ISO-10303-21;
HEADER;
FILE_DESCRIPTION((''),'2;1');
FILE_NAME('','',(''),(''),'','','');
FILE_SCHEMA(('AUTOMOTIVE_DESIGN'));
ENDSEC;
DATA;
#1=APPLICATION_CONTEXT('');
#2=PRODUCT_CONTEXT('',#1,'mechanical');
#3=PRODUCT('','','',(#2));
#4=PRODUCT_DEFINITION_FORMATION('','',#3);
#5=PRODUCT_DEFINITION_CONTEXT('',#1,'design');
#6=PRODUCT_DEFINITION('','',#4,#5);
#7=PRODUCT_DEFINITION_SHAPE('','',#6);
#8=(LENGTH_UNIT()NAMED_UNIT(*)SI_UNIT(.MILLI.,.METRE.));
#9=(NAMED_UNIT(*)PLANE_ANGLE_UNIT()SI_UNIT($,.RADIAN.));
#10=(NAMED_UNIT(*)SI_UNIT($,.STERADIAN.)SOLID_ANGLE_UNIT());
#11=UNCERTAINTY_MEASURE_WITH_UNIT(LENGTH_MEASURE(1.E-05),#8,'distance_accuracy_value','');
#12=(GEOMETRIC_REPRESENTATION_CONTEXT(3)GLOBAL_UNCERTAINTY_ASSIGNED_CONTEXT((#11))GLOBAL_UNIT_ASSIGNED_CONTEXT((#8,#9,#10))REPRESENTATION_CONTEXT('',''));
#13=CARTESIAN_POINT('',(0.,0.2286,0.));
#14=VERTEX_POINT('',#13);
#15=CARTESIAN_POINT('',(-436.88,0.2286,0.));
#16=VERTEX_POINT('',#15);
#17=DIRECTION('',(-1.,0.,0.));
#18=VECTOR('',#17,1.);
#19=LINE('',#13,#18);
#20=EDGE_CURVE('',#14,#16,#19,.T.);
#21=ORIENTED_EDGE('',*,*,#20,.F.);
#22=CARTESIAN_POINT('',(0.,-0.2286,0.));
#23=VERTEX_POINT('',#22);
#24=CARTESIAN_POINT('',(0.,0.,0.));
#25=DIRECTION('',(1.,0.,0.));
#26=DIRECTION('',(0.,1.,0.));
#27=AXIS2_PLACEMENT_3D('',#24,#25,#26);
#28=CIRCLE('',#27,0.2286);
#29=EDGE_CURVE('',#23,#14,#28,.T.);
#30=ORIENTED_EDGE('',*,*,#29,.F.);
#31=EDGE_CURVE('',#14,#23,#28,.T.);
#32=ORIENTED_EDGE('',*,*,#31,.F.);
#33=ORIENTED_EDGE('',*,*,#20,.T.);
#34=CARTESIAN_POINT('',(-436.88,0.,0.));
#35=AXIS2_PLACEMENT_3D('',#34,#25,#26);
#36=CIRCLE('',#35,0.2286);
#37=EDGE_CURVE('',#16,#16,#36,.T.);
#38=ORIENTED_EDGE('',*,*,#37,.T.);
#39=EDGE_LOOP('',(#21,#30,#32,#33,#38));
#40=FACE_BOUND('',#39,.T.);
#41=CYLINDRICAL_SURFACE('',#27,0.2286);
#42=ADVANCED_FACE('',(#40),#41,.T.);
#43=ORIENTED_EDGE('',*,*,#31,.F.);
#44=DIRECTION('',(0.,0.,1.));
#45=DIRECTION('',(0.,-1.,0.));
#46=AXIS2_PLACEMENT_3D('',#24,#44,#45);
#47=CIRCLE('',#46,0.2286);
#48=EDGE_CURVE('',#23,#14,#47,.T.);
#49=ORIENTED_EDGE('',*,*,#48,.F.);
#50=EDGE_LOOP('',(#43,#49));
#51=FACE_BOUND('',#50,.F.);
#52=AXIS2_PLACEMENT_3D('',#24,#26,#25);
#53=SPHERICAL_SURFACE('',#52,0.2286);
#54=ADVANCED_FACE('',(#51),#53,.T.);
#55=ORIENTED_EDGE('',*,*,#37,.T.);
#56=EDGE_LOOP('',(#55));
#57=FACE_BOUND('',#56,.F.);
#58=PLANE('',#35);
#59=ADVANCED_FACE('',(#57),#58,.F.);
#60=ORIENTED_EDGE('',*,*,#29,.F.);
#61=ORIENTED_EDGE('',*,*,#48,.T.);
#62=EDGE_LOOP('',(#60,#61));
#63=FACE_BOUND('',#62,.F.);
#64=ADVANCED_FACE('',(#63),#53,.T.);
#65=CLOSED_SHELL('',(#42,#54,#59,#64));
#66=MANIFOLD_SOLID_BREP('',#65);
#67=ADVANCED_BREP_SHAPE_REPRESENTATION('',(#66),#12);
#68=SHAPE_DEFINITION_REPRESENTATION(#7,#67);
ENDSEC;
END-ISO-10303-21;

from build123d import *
from build123d import SkipClean  # not in build123d's __all__

# Parameters (mm, degrees)
F2_R     = 0.2286
F3_DEPTH = 436.88


with BuildPart() as f1:
    # F0 (on Top) → F1 (revolve)
    with BuildSketch(Plane.XY):
        with BuildLine():
            Line((0, 0.2286), (0, -0.2286))
            ThreePointArc((0, -0.2286), (0.2286, 0), (0, 0.2286))
        make_face()
    revolve(axis=Axis((0, 0, 0), (0, -1, 0)))

    # F2 (on Right) → F3 (join)
    with BuildSketch(Plane.YZ):
        Circle(F2_R)
    with SkipClean():  # cleaning this boolean's faces spoils the solid; the shape is the same uncleaned
        extrude(amount=-F3_DEPTH)


solid = f1.part
